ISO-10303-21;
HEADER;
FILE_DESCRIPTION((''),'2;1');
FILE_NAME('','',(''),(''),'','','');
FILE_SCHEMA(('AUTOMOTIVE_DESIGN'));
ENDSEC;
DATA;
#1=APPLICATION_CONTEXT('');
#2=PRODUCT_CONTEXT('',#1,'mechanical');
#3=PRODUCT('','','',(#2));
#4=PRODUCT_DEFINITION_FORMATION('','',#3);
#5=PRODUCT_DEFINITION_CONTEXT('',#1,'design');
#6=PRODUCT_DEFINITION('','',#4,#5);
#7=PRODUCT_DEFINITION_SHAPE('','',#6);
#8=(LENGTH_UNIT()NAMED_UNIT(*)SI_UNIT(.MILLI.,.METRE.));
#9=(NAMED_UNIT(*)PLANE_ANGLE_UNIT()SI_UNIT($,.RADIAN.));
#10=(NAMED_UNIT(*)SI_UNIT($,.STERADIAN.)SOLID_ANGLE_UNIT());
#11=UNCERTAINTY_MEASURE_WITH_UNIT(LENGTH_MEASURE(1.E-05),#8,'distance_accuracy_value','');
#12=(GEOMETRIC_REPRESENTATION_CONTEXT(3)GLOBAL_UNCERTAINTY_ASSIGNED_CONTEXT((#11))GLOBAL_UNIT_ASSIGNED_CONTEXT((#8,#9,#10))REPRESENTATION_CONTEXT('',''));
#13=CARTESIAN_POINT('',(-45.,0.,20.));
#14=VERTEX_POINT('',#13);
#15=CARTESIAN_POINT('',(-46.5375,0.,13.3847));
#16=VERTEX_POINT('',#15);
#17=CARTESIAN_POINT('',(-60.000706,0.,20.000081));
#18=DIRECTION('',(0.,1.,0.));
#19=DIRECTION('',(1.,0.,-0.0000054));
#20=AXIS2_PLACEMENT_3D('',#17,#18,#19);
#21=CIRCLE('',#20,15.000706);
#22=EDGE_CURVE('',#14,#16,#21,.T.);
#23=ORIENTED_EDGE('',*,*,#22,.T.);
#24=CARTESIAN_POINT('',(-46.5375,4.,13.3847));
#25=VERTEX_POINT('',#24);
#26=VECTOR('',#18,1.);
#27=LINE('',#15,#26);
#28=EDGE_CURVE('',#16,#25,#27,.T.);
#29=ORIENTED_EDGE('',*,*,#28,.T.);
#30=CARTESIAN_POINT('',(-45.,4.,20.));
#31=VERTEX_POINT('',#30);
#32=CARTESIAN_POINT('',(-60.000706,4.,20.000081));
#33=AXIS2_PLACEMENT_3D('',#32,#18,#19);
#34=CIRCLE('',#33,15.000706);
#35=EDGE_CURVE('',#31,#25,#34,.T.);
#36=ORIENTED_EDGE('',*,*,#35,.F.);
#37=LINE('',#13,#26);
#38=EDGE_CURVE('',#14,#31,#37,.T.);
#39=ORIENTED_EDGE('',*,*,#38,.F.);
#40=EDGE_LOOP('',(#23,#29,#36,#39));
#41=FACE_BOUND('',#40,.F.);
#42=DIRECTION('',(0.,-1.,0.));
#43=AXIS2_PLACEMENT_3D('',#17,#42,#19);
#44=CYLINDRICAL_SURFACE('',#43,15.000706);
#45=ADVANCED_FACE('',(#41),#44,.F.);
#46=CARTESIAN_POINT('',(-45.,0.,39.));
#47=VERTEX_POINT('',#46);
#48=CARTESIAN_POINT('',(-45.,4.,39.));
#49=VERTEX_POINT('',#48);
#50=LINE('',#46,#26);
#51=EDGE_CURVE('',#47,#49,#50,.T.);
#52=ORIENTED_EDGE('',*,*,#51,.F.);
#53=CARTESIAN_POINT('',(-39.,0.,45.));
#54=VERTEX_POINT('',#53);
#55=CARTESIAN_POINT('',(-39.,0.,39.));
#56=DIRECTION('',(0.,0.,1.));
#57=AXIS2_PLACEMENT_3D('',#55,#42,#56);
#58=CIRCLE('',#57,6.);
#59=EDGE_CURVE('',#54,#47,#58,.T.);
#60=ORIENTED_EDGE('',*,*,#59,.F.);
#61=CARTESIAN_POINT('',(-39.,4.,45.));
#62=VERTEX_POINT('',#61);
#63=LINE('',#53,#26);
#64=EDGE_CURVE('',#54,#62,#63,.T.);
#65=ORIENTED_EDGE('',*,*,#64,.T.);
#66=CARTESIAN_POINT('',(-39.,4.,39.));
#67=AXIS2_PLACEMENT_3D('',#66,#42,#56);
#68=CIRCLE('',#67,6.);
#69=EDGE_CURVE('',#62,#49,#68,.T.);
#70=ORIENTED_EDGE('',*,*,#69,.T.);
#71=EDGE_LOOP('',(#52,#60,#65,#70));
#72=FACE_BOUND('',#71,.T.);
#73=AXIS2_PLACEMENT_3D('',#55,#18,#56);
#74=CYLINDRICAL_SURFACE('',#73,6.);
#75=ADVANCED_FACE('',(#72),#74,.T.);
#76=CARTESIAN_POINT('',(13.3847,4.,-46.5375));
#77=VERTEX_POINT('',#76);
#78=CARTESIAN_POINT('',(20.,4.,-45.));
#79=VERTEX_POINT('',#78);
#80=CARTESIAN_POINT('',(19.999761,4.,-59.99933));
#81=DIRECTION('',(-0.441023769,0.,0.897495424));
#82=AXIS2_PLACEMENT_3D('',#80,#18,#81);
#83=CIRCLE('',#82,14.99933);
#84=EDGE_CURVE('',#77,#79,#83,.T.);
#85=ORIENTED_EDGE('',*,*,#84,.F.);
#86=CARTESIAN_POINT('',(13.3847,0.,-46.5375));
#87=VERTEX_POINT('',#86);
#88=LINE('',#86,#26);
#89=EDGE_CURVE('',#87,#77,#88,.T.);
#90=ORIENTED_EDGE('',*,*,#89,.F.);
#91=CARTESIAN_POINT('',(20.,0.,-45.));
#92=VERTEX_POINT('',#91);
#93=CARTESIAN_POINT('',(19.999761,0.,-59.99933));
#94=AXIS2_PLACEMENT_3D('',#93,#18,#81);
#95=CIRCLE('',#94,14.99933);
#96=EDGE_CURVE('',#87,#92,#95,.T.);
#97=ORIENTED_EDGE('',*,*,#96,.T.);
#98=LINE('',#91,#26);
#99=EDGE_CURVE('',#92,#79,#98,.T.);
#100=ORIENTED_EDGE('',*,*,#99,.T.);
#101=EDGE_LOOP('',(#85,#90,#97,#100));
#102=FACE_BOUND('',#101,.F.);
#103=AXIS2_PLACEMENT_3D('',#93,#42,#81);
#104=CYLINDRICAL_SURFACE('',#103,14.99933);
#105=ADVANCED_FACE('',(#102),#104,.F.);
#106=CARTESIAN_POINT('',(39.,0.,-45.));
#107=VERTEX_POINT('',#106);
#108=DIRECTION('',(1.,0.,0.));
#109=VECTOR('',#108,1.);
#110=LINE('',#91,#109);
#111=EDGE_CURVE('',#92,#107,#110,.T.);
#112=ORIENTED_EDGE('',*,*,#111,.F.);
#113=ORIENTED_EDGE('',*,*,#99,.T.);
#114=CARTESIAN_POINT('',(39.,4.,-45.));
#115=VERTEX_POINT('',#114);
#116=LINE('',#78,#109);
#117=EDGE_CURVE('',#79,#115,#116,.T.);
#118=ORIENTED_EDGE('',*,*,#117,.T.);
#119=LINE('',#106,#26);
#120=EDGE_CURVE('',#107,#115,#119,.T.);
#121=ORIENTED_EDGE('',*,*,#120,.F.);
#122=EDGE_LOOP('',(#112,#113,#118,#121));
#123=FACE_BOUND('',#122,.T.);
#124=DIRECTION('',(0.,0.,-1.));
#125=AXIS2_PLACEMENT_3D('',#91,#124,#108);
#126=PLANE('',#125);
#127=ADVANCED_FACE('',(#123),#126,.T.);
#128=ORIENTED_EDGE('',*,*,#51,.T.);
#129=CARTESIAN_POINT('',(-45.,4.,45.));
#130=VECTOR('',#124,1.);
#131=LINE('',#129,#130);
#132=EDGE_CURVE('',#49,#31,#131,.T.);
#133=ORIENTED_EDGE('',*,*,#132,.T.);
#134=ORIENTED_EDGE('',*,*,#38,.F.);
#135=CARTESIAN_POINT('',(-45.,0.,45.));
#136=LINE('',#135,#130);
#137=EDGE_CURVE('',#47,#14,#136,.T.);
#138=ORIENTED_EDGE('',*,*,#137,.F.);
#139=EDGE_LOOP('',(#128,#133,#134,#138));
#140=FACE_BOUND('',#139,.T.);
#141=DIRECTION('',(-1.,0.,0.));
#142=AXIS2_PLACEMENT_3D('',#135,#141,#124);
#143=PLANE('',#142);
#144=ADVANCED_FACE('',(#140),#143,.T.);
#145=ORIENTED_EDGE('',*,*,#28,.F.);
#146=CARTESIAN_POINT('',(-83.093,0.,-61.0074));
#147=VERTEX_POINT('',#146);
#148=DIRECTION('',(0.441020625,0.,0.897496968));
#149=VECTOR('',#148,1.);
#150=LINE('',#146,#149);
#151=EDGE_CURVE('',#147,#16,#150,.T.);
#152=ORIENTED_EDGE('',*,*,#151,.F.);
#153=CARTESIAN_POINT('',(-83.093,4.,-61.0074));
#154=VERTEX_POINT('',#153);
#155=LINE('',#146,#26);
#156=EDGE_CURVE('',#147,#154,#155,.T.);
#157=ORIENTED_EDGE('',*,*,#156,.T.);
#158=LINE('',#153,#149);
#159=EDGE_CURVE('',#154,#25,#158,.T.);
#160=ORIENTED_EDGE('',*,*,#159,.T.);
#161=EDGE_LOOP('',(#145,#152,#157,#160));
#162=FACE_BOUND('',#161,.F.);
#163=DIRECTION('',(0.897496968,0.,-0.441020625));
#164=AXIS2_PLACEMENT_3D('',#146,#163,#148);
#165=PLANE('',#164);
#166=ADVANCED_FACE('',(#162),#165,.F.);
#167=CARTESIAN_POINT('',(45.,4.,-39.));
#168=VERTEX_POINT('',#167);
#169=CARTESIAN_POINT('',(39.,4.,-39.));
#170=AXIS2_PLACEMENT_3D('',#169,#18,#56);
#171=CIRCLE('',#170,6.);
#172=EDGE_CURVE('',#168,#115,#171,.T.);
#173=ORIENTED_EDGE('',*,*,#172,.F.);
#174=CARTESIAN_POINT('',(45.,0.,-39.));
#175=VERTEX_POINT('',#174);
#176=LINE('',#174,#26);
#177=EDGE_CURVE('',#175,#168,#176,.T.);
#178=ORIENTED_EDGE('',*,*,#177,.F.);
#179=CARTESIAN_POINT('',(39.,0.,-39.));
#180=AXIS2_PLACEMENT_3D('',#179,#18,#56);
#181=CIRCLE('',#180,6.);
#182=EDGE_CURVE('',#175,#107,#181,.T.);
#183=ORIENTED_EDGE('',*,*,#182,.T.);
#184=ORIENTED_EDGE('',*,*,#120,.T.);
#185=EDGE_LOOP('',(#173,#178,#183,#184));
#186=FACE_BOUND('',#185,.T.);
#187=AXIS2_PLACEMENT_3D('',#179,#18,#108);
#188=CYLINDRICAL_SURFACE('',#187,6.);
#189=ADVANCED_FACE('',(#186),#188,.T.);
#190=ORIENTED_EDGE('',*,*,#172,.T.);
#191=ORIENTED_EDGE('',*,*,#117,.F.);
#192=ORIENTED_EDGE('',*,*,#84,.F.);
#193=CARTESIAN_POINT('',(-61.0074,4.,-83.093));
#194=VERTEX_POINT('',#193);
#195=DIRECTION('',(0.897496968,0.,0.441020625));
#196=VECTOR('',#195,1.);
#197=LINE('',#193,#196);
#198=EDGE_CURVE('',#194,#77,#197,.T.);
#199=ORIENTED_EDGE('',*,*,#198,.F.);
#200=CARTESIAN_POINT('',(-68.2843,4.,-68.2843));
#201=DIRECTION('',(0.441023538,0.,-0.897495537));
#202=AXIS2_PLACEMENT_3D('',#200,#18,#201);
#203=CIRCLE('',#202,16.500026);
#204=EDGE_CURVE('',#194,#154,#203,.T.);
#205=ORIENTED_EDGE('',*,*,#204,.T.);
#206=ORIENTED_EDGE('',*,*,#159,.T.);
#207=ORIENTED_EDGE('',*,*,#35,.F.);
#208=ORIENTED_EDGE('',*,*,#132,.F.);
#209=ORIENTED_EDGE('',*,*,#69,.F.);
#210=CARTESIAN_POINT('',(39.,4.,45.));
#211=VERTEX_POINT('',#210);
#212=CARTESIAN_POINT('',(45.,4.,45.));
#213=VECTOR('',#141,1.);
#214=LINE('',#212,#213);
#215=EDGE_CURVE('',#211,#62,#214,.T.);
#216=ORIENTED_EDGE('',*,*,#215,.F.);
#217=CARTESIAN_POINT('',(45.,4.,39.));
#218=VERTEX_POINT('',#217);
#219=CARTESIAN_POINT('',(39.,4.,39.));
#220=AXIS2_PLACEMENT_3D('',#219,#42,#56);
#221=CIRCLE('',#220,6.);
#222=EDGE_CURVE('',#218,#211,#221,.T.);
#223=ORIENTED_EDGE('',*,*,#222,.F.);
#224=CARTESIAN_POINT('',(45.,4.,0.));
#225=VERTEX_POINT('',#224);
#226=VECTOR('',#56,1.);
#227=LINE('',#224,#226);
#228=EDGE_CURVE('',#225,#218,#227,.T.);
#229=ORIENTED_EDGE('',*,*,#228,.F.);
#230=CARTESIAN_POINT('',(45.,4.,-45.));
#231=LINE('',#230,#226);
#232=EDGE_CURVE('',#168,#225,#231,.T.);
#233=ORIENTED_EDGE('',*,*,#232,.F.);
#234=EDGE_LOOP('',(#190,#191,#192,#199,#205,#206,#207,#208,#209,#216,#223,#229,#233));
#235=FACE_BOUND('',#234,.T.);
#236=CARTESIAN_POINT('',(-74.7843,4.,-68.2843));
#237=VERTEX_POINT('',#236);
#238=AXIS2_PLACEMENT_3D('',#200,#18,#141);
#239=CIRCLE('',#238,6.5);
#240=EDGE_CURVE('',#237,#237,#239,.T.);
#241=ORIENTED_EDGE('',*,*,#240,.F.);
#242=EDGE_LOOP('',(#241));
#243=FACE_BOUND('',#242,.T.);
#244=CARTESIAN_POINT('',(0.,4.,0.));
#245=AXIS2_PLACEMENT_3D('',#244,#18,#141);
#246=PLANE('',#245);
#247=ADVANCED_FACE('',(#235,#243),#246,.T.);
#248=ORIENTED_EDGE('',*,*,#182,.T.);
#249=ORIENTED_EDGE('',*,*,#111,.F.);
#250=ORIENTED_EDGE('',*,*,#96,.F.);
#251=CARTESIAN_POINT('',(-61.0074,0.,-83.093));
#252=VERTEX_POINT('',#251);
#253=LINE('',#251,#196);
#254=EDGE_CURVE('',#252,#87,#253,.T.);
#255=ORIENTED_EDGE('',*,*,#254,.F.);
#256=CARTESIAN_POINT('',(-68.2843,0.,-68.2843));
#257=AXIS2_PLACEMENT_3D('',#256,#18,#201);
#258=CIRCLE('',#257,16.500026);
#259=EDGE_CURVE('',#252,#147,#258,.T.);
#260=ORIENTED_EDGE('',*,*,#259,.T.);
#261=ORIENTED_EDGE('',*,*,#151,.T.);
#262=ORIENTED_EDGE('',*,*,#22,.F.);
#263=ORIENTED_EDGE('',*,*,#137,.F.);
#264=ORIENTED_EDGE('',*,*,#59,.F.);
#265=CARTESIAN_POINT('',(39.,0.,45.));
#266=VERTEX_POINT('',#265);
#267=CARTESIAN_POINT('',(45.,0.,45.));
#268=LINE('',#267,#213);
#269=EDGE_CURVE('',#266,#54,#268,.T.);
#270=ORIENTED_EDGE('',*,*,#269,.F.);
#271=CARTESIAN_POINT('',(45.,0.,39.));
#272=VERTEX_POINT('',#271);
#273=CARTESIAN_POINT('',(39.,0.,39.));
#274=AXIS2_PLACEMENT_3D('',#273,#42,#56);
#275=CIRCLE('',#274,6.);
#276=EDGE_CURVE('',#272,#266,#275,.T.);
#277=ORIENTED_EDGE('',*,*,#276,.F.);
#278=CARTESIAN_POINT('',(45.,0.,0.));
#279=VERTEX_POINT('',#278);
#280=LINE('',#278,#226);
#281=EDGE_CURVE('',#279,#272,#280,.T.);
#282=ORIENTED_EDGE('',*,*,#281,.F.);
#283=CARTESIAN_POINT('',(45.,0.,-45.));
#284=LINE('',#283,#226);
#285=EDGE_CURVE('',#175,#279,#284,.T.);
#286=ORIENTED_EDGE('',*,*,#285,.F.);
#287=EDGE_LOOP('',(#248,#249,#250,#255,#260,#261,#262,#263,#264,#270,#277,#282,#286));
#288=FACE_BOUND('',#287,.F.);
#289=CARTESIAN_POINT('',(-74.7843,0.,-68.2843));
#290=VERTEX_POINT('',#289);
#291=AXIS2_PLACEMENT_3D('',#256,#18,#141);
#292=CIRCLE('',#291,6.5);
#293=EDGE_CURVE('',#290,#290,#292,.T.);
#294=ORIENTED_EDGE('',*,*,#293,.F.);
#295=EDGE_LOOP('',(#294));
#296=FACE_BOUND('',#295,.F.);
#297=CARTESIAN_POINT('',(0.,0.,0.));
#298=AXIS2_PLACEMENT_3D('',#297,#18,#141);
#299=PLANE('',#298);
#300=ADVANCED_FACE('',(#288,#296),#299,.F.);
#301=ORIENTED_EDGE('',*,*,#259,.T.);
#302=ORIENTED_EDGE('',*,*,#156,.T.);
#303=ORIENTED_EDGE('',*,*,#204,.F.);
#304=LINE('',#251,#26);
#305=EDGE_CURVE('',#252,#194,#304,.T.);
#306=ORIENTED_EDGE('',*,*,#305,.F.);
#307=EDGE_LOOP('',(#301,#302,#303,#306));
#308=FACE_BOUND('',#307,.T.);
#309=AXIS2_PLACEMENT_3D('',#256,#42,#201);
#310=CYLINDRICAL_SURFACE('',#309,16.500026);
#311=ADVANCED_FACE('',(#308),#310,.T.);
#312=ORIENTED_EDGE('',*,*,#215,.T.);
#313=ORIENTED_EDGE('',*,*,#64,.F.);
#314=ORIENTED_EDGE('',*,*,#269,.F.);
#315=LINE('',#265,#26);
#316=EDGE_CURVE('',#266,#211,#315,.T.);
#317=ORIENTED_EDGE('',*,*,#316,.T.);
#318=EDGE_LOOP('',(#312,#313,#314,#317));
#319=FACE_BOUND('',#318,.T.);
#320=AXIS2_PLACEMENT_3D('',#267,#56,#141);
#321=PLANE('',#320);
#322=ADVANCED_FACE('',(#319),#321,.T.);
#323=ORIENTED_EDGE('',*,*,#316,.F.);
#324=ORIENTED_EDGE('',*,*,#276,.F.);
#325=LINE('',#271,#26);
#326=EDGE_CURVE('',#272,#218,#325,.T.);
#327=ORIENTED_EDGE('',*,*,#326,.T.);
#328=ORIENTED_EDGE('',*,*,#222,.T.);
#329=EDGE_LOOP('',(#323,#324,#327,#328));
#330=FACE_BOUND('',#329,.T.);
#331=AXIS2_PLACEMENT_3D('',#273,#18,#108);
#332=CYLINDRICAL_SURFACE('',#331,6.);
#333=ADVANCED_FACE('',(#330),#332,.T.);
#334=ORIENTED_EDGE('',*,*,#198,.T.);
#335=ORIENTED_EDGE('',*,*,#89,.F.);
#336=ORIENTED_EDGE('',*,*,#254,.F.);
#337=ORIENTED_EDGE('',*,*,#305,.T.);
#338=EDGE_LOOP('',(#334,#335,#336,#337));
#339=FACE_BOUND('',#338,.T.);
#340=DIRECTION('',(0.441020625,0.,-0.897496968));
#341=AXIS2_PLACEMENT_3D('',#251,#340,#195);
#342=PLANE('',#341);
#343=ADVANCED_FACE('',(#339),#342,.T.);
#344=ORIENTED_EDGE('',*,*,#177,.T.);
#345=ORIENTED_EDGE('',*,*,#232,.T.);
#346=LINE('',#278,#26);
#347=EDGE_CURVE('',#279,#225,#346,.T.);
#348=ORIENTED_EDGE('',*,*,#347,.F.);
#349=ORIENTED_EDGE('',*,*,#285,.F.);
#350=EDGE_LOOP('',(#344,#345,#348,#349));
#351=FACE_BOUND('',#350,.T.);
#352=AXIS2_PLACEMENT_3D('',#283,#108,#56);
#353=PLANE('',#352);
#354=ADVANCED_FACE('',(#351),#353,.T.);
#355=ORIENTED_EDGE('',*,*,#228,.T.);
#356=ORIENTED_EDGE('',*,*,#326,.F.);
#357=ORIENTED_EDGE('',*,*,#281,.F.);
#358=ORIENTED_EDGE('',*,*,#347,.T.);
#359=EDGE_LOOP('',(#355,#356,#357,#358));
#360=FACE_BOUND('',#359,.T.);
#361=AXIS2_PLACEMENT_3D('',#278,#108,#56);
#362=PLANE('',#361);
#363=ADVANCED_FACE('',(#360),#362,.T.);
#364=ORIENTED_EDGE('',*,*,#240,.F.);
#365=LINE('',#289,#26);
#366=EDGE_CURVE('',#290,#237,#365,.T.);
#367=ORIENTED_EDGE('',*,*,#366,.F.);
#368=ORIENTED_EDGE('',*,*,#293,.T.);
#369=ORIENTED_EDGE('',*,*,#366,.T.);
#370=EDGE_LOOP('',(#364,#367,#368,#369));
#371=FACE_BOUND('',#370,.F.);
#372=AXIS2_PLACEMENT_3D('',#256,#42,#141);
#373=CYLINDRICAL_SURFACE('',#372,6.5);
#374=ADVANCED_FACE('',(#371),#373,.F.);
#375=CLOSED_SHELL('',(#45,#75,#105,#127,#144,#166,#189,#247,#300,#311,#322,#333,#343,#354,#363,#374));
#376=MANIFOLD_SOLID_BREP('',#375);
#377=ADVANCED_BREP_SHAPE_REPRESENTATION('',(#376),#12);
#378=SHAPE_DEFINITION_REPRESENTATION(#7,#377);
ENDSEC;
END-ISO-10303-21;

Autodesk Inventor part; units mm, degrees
ref_plane "YZ Plane" through (0, 0, 0) normal (1, 0, 0) x (0, 1, 0)
ref_plane "XZ Plane" through (0, 0, 0) normal (0, 1, 0) x (-1, 0, 0)
ref_plane "XY Plane" through (0, 0, 0) normal (0, 0, 1) x (1, 0, 0)
sketch "Sketch1" plane through (0, 0, 0) normal (0, 1, 0) x (-1, 0, 0)
  line L0 (40, 40) -> (-40, 40) construction
  line L1 (-40, 40) -> (-40, -40) construction
  line L2 (-40, -40) -> (40, -40) construction
  line L3 (40, -40) -> (40, 40) construction
  line L4 (-40, 40) -> (40, -40) construction
  line L5 (0, 40) -> (0, -40) construction
  line L6 (-45, -45) -> (-45, 0)
  line L7 (-20, -45) -> (-45, -45)
  arc A0 (61.0074, -83.093) -> (83.093, -61.0074) centre (68.2843, -68.2843) ccw
  circle A1 centre (68.2843, -68.2843) radius 6.5
  line L8 (61.0074, -83.093) -> (-13.3847, -46.5375)
  arc A2 (-13.3847, -46.5375) -> (-20, -45) centre (-20, -60) ccw
  arc A3 (83.093, -61.0074) -> (61.0074, -83.093) centre (68.2843, -68.2843) ccw construction
  line L9 (83.093, -61.0074) -> (46.5375, 13.3847)
  line L10 (-45, 0) -> (-45, 45)
  line L11 (-45, 45) -> (45, 45)
  line L12 (45, 45) -> (45, 20)
  arc A4 (45, 20) -> (46.5375, 13.3847) centre (60, 20) ccw
  line L13 (40, 0) -> (45, 0) construction
  line L14 (0, 40) -> (0, 45) construction
  line L15 (-40, 0) -> (-45, 0) construction
  point P0 (0, 0)
  point P1 (0, 0)
  point P2 (0, 0)
  dimension "d2" = 80
  dimension "d3" = 80
  dimension "d29" = 5
  dimension "d30" = 13
  dimension "d31" = 10
  dimension "d32" = 40
  dimension "d34" = 5
  dimension "d35" = 15
  dimension "d36" = 25
extrude "Plate1" add sketch "Sketch1" along normal blind 4
fillet "Corner Round3" radius 6 3 edges at (-45, 2, 45) (45, 2, 45) (45, 2, -45)
equation "\"d34\" = d29"
equation "\"d6\" = Thickness"
equation "\"Thickness\" = 4"
properties part number "MSC 902 base plate" material "Stainless Steel"
